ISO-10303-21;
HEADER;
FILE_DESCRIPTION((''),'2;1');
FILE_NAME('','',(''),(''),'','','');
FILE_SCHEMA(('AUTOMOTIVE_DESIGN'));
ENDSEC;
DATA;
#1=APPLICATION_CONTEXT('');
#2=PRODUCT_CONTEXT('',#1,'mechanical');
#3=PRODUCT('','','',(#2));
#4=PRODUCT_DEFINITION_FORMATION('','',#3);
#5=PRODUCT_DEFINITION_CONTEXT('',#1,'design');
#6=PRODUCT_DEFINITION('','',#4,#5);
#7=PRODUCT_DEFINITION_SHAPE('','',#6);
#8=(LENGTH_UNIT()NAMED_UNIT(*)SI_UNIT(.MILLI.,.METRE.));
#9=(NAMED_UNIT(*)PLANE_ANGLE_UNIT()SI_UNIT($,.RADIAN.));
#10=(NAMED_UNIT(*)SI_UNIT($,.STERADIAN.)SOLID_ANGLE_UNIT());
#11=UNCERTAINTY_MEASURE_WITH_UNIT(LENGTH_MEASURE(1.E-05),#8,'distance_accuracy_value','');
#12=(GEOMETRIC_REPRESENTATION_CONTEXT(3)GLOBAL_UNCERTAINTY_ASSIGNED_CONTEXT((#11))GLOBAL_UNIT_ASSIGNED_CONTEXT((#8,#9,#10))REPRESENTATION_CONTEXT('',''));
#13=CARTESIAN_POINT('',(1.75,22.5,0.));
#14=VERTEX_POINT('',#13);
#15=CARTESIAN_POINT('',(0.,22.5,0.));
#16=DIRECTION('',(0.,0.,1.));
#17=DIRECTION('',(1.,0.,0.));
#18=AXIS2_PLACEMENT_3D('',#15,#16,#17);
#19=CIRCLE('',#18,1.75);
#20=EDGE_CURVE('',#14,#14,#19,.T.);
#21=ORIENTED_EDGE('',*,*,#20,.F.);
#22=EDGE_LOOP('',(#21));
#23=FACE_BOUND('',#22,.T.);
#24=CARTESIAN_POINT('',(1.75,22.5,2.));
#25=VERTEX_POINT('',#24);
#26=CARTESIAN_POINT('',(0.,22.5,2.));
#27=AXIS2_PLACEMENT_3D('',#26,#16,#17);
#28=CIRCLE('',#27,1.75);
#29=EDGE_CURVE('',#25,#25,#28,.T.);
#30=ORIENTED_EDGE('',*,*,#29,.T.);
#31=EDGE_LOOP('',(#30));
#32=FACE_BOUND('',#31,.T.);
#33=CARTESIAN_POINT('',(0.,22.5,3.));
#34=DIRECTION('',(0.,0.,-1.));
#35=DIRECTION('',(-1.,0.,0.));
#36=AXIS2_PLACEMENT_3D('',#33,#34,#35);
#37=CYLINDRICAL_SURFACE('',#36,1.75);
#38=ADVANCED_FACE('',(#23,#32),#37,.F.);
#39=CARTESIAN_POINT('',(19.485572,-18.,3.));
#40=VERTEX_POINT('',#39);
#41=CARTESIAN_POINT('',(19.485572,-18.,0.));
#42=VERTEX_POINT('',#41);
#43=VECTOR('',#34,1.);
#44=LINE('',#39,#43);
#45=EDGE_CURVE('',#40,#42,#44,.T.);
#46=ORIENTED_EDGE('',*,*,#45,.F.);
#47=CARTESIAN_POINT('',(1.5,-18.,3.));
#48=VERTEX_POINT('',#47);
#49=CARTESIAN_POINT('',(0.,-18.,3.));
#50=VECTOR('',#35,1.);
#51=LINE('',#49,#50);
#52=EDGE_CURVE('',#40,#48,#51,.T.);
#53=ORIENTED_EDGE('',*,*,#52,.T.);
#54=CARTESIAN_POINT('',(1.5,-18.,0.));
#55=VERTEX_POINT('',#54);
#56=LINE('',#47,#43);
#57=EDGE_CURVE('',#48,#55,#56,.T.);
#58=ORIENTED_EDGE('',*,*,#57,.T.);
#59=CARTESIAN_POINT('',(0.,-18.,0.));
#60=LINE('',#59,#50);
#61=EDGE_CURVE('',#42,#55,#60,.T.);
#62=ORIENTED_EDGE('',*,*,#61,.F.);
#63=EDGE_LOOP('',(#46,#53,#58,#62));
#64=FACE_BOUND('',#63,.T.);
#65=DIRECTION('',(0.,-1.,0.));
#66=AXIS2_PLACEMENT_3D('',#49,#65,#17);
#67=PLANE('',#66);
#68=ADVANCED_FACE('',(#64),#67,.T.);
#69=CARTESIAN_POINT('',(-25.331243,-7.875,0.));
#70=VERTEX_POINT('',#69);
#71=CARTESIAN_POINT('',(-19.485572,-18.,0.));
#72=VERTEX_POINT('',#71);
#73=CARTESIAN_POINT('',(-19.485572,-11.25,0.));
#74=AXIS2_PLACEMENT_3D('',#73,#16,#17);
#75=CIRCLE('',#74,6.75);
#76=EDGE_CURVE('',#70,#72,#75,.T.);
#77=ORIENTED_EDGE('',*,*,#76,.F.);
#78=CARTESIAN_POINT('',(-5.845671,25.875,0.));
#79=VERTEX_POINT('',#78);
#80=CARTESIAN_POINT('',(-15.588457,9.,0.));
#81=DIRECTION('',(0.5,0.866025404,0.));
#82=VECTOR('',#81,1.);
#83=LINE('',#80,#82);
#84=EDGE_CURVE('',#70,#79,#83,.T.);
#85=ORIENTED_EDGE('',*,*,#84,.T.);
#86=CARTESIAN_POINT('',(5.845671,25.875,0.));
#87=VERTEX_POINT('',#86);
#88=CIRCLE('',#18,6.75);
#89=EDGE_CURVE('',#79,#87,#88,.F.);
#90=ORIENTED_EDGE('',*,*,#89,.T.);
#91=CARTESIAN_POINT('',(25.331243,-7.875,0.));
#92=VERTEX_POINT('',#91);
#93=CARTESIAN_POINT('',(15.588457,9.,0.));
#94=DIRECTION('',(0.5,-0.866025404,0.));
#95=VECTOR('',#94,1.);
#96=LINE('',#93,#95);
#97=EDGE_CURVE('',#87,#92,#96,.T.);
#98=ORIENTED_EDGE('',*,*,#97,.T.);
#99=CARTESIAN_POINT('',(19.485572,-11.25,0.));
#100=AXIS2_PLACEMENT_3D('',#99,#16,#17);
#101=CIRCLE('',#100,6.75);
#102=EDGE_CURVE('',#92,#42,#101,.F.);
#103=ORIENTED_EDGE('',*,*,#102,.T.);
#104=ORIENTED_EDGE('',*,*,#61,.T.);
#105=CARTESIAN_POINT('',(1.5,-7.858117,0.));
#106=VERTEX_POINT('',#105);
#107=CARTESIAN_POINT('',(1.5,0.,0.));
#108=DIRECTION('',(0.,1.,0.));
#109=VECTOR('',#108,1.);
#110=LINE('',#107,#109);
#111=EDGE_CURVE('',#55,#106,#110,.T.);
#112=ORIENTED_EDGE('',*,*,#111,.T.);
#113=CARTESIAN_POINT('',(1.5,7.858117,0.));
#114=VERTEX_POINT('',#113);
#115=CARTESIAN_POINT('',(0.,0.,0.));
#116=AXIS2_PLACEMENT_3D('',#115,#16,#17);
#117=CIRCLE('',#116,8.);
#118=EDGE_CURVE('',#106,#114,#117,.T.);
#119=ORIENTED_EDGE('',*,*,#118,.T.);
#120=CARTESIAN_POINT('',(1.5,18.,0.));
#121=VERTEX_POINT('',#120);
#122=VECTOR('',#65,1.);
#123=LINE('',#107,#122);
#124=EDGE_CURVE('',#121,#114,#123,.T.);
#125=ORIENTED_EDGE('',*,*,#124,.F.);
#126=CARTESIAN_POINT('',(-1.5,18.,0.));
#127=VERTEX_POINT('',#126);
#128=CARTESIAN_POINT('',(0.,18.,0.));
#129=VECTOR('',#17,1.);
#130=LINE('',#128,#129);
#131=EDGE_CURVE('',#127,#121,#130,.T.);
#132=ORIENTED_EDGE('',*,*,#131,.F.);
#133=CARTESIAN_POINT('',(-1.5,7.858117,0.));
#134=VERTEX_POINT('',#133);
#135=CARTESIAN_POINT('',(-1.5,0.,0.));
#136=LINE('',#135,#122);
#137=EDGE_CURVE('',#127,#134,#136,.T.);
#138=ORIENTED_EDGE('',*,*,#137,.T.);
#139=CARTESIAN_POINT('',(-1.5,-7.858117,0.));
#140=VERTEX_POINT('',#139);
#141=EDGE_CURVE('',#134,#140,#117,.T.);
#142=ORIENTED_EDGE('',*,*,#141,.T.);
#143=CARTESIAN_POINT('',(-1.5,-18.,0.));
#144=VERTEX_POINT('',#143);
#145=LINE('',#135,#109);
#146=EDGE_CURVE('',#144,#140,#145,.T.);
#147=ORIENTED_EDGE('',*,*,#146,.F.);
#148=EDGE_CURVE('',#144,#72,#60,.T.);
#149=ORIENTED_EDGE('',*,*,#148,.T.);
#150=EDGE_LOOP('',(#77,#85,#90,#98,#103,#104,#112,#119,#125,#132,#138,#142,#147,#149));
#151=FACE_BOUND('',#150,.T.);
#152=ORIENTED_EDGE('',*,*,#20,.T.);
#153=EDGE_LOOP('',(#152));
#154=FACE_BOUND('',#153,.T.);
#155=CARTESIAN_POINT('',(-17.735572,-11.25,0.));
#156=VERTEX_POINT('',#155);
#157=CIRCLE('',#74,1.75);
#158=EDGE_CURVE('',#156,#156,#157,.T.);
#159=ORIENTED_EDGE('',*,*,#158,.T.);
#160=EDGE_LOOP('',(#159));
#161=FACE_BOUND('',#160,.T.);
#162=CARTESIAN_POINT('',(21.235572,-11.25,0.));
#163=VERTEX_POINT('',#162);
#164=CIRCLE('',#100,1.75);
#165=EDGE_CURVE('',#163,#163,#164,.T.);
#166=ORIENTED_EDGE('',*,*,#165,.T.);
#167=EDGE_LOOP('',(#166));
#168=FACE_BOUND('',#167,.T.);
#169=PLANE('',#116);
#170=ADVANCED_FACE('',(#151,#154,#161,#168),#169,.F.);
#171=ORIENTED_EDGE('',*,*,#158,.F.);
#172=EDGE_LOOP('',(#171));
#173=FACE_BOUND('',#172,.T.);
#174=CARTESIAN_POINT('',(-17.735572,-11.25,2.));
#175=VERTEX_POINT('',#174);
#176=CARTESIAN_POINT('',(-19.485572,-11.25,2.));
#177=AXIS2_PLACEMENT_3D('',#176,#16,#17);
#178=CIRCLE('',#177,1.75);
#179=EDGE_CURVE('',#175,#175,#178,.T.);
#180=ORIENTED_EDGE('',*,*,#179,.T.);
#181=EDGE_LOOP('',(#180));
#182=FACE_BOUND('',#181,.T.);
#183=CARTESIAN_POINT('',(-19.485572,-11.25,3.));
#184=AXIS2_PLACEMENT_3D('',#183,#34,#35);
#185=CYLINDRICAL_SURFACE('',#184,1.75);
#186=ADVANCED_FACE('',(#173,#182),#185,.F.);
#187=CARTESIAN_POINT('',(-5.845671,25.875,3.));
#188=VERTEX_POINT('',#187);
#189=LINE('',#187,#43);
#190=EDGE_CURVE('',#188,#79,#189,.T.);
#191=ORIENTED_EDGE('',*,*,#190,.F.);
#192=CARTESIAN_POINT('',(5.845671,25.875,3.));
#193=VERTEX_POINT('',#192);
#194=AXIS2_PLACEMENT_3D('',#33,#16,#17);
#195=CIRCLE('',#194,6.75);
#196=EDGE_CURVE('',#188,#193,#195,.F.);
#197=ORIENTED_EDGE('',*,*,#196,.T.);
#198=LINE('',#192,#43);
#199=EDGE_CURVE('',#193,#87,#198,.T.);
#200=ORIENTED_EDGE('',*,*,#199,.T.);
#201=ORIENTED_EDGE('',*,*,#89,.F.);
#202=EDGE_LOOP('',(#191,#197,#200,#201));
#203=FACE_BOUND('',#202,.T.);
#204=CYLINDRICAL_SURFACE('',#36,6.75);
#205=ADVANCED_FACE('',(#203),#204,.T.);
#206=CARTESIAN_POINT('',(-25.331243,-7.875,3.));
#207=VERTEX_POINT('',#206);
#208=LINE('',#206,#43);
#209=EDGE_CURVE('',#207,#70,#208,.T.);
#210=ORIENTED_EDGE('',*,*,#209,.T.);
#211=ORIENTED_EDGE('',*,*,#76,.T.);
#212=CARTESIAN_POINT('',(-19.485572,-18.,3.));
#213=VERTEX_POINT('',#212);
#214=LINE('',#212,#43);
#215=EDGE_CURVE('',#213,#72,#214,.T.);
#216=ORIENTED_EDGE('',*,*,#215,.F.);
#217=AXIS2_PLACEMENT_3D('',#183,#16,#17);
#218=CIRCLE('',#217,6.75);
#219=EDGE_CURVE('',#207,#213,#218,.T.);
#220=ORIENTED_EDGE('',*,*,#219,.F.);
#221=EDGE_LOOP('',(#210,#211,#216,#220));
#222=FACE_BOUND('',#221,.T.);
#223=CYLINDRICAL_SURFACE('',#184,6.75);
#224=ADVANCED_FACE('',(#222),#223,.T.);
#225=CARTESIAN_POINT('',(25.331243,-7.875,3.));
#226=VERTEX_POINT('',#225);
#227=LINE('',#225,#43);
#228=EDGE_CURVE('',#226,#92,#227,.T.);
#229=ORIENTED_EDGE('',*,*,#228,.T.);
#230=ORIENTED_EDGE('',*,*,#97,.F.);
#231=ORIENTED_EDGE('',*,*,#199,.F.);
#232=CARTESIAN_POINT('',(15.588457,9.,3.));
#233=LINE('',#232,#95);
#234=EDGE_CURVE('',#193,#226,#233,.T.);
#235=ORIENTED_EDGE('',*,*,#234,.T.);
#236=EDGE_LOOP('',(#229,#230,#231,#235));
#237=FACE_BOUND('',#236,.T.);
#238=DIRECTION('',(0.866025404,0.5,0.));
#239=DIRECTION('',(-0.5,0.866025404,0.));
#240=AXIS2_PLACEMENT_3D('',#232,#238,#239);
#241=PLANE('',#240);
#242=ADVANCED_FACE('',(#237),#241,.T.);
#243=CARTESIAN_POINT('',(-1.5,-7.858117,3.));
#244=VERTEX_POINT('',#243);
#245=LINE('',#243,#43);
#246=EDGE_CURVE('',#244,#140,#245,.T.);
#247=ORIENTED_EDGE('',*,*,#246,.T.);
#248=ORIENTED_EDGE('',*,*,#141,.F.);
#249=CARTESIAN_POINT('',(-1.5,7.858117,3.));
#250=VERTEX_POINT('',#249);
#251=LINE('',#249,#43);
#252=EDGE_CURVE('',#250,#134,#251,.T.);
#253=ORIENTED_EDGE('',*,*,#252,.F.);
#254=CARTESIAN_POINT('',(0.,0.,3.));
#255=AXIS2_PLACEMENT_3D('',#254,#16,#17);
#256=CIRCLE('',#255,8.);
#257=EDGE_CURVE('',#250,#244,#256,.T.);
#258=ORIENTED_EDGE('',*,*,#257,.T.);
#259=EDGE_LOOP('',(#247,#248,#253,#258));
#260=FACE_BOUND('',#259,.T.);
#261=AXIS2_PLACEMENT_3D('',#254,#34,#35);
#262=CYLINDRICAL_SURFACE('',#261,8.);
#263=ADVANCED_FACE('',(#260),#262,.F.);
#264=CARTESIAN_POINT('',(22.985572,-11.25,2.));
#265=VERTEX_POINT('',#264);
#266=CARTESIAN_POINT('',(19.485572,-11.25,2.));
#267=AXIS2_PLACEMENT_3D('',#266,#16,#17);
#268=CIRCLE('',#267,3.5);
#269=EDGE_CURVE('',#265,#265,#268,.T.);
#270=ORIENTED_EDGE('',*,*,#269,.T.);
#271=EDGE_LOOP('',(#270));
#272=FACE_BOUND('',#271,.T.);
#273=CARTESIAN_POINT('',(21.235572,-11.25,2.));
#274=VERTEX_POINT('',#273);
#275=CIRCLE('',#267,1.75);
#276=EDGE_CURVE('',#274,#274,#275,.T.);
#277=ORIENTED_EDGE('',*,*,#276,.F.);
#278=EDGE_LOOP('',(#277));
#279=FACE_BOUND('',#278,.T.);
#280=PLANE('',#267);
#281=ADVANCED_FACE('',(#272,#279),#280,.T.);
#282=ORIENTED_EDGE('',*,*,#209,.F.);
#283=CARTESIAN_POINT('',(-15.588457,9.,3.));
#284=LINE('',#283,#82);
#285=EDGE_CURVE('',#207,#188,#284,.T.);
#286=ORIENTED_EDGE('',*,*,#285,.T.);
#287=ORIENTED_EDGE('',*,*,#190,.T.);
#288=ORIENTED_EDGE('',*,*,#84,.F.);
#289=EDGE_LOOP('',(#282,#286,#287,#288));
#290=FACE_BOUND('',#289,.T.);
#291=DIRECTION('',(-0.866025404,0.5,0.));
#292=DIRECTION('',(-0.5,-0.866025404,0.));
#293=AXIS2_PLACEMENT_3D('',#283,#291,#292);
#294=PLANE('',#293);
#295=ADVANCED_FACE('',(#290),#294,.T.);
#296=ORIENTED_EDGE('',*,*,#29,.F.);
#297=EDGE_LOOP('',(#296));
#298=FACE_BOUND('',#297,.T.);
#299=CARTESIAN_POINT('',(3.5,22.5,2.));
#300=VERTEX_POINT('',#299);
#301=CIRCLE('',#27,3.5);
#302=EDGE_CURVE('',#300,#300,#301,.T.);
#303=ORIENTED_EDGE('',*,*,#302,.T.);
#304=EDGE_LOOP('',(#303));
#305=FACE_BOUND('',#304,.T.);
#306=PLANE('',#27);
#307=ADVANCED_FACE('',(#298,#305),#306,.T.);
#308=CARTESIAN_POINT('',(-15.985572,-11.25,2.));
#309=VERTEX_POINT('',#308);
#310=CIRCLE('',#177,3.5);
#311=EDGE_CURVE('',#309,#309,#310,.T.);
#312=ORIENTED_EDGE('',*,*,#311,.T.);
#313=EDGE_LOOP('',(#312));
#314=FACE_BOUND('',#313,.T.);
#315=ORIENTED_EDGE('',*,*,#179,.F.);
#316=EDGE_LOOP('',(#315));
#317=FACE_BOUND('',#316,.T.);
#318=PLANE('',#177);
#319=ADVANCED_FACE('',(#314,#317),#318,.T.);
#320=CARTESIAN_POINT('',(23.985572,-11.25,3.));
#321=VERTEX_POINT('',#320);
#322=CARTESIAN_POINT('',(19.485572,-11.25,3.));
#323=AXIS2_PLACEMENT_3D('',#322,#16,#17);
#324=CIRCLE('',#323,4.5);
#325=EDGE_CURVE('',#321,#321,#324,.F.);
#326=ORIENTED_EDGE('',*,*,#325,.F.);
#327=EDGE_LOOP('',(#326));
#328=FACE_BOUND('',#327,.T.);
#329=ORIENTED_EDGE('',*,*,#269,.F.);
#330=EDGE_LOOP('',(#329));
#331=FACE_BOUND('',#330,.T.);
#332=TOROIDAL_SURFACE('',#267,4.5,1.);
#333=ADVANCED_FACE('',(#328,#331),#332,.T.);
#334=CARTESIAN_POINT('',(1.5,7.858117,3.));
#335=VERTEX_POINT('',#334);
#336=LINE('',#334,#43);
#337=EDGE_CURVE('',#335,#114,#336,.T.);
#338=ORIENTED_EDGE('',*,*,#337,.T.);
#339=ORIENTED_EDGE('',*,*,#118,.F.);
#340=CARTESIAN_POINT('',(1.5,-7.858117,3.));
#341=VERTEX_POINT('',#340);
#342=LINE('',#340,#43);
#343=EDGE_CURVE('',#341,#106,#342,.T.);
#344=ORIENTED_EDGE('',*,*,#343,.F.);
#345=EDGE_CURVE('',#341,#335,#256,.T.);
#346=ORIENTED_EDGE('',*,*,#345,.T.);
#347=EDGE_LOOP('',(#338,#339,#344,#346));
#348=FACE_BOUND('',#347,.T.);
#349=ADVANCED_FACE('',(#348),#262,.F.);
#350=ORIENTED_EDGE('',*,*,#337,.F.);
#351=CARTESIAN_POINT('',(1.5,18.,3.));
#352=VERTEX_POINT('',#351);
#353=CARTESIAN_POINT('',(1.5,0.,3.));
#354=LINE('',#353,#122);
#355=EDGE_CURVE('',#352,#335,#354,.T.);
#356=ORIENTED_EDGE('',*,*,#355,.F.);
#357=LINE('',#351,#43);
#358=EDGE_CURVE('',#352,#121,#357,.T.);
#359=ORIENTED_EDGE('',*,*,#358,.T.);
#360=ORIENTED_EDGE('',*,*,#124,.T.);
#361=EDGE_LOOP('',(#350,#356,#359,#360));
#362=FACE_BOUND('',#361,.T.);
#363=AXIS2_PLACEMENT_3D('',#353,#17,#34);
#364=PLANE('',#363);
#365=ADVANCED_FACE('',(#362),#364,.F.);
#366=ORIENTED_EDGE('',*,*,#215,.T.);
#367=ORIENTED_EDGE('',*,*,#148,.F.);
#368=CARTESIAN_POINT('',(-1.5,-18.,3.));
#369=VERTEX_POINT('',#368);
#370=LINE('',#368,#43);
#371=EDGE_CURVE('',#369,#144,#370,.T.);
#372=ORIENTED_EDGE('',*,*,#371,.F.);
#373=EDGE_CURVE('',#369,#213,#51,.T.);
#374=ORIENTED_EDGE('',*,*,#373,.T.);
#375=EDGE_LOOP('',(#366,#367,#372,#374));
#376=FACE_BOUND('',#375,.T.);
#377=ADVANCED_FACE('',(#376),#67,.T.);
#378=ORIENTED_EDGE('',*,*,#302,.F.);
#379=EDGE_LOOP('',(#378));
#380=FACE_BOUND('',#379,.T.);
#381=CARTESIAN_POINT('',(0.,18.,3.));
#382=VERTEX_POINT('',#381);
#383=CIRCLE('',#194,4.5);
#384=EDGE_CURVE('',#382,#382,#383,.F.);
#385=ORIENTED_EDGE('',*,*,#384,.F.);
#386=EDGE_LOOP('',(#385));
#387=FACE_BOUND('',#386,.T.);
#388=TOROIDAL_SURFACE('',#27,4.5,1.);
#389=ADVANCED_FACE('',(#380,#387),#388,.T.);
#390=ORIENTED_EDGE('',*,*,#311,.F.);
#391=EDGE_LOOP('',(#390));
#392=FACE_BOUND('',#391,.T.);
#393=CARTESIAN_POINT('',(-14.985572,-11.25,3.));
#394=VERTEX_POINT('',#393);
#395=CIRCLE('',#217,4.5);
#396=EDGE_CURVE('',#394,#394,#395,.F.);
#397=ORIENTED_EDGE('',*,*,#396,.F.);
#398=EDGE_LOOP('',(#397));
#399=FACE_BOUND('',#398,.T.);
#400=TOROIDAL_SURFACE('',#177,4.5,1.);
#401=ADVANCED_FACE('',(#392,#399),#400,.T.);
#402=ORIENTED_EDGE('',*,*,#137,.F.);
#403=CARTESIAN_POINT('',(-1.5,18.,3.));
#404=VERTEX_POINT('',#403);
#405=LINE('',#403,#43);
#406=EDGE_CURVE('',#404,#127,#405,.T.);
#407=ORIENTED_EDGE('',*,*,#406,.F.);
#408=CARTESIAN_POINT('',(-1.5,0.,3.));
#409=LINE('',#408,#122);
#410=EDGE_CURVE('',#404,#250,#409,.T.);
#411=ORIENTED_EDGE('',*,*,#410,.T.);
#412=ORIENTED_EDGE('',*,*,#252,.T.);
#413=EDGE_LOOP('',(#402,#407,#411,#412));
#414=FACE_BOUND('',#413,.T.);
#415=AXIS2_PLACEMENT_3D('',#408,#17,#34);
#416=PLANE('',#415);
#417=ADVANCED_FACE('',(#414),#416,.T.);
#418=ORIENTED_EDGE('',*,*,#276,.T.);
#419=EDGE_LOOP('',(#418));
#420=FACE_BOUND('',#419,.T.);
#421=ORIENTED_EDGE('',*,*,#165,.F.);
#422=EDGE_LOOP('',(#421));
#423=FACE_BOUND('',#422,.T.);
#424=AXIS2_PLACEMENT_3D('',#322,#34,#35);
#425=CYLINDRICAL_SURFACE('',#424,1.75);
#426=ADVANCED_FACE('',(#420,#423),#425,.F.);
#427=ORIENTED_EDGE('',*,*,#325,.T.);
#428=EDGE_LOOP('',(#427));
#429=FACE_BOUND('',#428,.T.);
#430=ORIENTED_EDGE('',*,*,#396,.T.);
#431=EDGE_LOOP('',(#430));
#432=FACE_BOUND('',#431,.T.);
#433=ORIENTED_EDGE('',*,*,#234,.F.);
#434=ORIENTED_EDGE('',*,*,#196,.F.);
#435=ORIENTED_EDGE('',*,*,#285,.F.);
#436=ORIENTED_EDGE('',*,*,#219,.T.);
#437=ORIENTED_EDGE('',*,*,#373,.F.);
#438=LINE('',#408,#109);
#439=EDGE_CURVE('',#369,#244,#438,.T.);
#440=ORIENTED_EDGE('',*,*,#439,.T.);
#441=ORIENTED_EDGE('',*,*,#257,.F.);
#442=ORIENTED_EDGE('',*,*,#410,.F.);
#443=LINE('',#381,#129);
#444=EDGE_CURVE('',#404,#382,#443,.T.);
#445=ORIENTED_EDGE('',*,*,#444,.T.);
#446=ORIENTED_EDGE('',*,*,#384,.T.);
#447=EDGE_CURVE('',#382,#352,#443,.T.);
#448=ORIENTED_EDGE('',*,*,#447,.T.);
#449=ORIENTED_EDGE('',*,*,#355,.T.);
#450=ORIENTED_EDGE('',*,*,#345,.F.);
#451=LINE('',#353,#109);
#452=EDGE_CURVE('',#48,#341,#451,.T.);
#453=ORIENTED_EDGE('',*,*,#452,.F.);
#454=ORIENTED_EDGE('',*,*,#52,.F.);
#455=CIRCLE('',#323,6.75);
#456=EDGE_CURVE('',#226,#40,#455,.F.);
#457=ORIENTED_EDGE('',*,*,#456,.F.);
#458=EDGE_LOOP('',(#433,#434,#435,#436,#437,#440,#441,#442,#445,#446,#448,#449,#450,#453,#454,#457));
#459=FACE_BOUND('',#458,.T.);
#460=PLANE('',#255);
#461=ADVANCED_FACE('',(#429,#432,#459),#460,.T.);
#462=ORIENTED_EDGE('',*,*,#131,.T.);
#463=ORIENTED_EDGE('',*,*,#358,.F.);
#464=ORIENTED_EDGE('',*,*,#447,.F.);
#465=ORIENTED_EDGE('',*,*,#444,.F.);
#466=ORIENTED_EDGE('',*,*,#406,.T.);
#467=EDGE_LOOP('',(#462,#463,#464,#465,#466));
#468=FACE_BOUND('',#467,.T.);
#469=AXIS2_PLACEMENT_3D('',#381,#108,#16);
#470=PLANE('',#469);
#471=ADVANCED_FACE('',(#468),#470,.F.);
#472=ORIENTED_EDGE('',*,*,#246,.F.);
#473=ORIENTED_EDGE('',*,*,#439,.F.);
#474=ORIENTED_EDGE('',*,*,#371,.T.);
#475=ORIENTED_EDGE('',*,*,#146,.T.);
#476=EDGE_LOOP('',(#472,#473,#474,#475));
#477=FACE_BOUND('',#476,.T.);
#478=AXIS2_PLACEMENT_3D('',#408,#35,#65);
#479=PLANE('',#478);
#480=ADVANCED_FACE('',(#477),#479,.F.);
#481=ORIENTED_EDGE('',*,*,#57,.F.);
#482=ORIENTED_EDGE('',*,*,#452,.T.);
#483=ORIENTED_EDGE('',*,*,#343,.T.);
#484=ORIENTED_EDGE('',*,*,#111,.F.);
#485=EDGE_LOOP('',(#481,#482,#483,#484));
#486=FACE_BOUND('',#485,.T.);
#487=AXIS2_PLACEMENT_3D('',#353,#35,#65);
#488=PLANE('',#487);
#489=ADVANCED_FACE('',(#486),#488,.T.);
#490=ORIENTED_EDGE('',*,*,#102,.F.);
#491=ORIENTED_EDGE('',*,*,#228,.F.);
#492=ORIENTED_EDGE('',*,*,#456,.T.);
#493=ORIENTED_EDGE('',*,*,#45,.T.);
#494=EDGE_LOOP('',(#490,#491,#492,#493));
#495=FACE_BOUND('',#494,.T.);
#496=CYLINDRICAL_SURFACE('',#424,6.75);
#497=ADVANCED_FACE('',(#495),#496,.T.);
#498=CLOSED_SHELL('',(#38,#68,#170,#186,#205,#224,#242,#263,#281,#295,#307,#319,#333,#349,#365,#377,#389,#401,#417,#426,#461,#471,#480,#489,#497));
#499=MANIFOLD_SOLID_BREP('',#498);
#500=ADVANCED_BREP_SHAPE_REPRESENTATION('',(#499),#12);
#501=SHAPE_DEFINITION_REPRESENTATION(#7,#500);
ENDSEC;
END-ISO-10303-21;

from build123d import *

# Parameters (mm, degrees)
SKETCH1_R           = 1.75
BOSS_EXTRUDE1_DEPTH = 3
SKETCH2_R           = 3.5
CUT_EXTRUDE1_DEPTH  = 1
FILLET1_R           = 1


with BuildPart() as part:
    # Sketch1 → Boss-Extrude1 (new body)
    with BuildSketch(Plane.XY):
        with BuildLine():
            Line((-5.845671476, 25.875), (-25.331243061, -7.875))
            ThreePointArc((-25.331243061, -7.875), (-25.331243061, -14.625), (-19.485571585, -18))
            Line((-19.485571585, -18), (-1.5, -18))
            Line((-1.5, -18), (-1.5, -7.858116823))
            ThreePointArc((-1.5, -7.858116823), (-8, 0), (-1.5, 7.858116823))
            Line((-1.5, 7.858116823), (-1.5, 18))
            Line((-1.5, 18), (1.5, 18))
            Line((1.5, 18), (1.5, 7.858116823))
            ThreePointArc((1.5, 7.858116823), (6.164414003, 5.099019514), (8, 0))
            ThreePointArc((8, 0), (6.164414003, -5.099019514), (1.5, -7.858116823))
            Line((1.5, -7.858116823), (1.5, -18))
            Line((1.5, -18), (19.485571585, -18))
            ThreePointArc((19.485571585, -18), (25.331243061, -14.625), (25.331243061, -7.875))
            Line((25.331243061, -7.875), (5.845671476, 25.875))
            ThreePointArc((5.845671476, 25.875), (0, 29.25), (-5.845671476, 25.875))
        make_face()
        with Locations((-19.485571585, -11.25)):
            Circle(SKETCH1_R, mode=Mode.SUBTRACT)
        with Locations((19.485571585, -11.25)):
            Circle(SKETCH1_R, mode=Mode.SUBTRACT)
        with Locations((0, 22.5)):
            Circle(SKETCH1_R, mode=Mode.SUBTRACT)
    extrude(amount=BOSS_EXTRUDE1_DEPTH)

    # Sketch2 → Cut-Extrude1 (cut)
    with BuildSketch(Plane.XY.offset(3)):
        with Locations((0, 22.5)):
            Circle(SKETCH2_R)
        with Locations((19.485571585, -11.25)):
            Circle(SKETCH2_R)
        with Locations((-19.485571585, -11.25)):
            Circle(SKETCH2_R)
    extrude(amount=-CUT_EXTRUDE1_DEPTH, mode=Mode.SUBTRACT)

    # Fillet1
    fillet1_edges = [part.edges().sort_by_distance(p)[0] for p in [
        (-3.5, 22.5, 3),
        (15.985571585, -11.25, 3),
        (-22.985571585, -11.25, 3),
    ]]
    fillet(fillet1_edges, radius=FILLET1_R - 0.0001)  # a hair under: the kernel refuses the full size


solid = part.part
